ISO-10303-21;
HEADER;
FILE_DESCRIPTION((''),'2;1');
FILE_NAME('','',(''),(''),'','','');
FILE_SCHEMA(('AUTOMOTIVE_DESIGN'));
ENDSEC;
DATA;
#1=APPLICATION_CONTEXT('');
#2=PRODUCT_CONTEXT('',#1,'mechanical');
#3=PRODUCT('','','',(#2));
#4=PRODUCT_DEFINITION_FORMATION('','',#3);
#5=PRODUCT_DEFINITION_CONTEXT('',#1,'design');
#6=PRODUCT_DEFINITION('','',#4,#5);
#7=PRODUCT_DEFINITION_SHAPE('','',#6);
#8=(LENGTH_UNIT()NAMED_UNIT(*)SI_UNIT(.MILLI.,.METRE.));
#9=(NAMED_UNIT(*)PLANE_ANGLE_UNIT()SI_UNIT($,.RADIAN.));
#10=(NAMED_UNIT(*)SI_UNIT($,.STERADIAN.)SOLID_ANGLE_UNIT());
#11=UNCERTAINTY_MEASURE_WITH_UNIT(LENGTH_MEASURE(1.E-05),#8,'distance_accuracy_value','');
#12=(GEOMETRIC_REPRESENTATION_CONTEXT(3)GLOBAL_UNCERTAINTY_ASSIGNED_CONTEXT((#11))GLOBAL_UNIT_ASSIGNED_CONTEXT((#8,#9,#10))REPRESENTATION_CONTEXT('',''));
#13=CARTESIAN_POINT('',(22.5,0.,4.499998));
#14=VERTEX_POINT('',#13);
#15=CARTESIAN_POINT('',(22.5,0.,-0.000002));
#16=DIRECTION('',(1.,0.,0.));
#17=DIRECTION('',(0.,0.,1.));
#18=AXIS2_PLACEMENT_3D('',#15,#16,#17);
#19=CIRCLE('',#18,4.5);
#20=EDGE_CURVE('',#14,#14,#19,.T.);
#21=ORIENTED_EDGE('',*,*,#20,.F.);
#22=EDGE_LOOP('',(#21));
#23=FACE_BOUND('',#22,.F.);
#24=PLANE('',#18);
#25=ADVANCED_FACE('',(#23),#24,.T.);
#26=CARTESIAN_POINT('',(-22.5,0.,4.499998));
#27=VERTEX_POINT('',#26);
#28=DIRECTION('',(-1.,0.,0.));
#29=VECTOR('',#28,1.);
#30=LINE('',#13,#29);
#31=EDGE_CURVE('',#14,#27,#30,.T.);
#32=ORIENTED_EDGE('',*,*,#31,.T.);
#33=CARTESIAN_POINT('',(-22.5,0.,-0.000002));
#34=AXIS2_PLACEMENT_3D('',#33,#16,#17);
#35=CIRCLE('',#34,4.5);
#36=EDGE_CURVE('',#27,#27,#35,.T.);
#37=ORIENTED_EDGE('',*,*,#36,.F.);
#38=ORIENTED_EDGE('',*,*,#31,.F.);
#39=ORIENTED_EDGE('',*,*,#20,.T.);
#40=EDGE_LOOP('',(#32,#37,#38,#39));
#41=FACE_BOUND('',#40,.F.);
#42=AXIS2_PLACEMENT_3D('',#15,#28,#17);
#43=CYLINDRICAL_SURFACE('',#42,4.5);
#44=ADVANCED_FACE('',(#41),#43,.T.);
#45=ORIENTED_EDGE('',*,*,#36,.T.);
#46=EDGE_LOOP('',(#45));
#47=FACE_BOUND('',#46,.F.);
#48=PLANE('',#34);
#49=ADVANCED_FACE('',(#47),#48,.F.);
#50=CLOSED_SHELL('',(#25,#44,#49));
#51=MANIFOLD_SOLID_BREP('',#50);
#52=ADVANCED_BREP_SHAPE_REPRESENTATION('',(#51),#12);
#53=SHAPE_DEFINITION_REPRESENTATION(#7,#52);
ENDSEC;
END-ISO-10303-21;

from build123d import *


# Not quite as in the source:
# - ends of sketch curves that miss each other by under 0.0002 mm in the source are joined


with BuildPart() as f1:
    # F0 (on Front) → F1 (revolve)
    with BuildSketch(Plane.XZ):
        Polygon((22.5, 4.4999983363), (0, 4.4999983363), (-22.5, 4.4999983363), (-22.5, -1.6637e-06), (-1.294e-06, -1.6637e-06), (22.5, -1.6637e-06), align=None)
    revolve(axis=Axis((-11.250000647, 0, -1.6637e-06), (1, 0, 0)))


solid = f1.part
